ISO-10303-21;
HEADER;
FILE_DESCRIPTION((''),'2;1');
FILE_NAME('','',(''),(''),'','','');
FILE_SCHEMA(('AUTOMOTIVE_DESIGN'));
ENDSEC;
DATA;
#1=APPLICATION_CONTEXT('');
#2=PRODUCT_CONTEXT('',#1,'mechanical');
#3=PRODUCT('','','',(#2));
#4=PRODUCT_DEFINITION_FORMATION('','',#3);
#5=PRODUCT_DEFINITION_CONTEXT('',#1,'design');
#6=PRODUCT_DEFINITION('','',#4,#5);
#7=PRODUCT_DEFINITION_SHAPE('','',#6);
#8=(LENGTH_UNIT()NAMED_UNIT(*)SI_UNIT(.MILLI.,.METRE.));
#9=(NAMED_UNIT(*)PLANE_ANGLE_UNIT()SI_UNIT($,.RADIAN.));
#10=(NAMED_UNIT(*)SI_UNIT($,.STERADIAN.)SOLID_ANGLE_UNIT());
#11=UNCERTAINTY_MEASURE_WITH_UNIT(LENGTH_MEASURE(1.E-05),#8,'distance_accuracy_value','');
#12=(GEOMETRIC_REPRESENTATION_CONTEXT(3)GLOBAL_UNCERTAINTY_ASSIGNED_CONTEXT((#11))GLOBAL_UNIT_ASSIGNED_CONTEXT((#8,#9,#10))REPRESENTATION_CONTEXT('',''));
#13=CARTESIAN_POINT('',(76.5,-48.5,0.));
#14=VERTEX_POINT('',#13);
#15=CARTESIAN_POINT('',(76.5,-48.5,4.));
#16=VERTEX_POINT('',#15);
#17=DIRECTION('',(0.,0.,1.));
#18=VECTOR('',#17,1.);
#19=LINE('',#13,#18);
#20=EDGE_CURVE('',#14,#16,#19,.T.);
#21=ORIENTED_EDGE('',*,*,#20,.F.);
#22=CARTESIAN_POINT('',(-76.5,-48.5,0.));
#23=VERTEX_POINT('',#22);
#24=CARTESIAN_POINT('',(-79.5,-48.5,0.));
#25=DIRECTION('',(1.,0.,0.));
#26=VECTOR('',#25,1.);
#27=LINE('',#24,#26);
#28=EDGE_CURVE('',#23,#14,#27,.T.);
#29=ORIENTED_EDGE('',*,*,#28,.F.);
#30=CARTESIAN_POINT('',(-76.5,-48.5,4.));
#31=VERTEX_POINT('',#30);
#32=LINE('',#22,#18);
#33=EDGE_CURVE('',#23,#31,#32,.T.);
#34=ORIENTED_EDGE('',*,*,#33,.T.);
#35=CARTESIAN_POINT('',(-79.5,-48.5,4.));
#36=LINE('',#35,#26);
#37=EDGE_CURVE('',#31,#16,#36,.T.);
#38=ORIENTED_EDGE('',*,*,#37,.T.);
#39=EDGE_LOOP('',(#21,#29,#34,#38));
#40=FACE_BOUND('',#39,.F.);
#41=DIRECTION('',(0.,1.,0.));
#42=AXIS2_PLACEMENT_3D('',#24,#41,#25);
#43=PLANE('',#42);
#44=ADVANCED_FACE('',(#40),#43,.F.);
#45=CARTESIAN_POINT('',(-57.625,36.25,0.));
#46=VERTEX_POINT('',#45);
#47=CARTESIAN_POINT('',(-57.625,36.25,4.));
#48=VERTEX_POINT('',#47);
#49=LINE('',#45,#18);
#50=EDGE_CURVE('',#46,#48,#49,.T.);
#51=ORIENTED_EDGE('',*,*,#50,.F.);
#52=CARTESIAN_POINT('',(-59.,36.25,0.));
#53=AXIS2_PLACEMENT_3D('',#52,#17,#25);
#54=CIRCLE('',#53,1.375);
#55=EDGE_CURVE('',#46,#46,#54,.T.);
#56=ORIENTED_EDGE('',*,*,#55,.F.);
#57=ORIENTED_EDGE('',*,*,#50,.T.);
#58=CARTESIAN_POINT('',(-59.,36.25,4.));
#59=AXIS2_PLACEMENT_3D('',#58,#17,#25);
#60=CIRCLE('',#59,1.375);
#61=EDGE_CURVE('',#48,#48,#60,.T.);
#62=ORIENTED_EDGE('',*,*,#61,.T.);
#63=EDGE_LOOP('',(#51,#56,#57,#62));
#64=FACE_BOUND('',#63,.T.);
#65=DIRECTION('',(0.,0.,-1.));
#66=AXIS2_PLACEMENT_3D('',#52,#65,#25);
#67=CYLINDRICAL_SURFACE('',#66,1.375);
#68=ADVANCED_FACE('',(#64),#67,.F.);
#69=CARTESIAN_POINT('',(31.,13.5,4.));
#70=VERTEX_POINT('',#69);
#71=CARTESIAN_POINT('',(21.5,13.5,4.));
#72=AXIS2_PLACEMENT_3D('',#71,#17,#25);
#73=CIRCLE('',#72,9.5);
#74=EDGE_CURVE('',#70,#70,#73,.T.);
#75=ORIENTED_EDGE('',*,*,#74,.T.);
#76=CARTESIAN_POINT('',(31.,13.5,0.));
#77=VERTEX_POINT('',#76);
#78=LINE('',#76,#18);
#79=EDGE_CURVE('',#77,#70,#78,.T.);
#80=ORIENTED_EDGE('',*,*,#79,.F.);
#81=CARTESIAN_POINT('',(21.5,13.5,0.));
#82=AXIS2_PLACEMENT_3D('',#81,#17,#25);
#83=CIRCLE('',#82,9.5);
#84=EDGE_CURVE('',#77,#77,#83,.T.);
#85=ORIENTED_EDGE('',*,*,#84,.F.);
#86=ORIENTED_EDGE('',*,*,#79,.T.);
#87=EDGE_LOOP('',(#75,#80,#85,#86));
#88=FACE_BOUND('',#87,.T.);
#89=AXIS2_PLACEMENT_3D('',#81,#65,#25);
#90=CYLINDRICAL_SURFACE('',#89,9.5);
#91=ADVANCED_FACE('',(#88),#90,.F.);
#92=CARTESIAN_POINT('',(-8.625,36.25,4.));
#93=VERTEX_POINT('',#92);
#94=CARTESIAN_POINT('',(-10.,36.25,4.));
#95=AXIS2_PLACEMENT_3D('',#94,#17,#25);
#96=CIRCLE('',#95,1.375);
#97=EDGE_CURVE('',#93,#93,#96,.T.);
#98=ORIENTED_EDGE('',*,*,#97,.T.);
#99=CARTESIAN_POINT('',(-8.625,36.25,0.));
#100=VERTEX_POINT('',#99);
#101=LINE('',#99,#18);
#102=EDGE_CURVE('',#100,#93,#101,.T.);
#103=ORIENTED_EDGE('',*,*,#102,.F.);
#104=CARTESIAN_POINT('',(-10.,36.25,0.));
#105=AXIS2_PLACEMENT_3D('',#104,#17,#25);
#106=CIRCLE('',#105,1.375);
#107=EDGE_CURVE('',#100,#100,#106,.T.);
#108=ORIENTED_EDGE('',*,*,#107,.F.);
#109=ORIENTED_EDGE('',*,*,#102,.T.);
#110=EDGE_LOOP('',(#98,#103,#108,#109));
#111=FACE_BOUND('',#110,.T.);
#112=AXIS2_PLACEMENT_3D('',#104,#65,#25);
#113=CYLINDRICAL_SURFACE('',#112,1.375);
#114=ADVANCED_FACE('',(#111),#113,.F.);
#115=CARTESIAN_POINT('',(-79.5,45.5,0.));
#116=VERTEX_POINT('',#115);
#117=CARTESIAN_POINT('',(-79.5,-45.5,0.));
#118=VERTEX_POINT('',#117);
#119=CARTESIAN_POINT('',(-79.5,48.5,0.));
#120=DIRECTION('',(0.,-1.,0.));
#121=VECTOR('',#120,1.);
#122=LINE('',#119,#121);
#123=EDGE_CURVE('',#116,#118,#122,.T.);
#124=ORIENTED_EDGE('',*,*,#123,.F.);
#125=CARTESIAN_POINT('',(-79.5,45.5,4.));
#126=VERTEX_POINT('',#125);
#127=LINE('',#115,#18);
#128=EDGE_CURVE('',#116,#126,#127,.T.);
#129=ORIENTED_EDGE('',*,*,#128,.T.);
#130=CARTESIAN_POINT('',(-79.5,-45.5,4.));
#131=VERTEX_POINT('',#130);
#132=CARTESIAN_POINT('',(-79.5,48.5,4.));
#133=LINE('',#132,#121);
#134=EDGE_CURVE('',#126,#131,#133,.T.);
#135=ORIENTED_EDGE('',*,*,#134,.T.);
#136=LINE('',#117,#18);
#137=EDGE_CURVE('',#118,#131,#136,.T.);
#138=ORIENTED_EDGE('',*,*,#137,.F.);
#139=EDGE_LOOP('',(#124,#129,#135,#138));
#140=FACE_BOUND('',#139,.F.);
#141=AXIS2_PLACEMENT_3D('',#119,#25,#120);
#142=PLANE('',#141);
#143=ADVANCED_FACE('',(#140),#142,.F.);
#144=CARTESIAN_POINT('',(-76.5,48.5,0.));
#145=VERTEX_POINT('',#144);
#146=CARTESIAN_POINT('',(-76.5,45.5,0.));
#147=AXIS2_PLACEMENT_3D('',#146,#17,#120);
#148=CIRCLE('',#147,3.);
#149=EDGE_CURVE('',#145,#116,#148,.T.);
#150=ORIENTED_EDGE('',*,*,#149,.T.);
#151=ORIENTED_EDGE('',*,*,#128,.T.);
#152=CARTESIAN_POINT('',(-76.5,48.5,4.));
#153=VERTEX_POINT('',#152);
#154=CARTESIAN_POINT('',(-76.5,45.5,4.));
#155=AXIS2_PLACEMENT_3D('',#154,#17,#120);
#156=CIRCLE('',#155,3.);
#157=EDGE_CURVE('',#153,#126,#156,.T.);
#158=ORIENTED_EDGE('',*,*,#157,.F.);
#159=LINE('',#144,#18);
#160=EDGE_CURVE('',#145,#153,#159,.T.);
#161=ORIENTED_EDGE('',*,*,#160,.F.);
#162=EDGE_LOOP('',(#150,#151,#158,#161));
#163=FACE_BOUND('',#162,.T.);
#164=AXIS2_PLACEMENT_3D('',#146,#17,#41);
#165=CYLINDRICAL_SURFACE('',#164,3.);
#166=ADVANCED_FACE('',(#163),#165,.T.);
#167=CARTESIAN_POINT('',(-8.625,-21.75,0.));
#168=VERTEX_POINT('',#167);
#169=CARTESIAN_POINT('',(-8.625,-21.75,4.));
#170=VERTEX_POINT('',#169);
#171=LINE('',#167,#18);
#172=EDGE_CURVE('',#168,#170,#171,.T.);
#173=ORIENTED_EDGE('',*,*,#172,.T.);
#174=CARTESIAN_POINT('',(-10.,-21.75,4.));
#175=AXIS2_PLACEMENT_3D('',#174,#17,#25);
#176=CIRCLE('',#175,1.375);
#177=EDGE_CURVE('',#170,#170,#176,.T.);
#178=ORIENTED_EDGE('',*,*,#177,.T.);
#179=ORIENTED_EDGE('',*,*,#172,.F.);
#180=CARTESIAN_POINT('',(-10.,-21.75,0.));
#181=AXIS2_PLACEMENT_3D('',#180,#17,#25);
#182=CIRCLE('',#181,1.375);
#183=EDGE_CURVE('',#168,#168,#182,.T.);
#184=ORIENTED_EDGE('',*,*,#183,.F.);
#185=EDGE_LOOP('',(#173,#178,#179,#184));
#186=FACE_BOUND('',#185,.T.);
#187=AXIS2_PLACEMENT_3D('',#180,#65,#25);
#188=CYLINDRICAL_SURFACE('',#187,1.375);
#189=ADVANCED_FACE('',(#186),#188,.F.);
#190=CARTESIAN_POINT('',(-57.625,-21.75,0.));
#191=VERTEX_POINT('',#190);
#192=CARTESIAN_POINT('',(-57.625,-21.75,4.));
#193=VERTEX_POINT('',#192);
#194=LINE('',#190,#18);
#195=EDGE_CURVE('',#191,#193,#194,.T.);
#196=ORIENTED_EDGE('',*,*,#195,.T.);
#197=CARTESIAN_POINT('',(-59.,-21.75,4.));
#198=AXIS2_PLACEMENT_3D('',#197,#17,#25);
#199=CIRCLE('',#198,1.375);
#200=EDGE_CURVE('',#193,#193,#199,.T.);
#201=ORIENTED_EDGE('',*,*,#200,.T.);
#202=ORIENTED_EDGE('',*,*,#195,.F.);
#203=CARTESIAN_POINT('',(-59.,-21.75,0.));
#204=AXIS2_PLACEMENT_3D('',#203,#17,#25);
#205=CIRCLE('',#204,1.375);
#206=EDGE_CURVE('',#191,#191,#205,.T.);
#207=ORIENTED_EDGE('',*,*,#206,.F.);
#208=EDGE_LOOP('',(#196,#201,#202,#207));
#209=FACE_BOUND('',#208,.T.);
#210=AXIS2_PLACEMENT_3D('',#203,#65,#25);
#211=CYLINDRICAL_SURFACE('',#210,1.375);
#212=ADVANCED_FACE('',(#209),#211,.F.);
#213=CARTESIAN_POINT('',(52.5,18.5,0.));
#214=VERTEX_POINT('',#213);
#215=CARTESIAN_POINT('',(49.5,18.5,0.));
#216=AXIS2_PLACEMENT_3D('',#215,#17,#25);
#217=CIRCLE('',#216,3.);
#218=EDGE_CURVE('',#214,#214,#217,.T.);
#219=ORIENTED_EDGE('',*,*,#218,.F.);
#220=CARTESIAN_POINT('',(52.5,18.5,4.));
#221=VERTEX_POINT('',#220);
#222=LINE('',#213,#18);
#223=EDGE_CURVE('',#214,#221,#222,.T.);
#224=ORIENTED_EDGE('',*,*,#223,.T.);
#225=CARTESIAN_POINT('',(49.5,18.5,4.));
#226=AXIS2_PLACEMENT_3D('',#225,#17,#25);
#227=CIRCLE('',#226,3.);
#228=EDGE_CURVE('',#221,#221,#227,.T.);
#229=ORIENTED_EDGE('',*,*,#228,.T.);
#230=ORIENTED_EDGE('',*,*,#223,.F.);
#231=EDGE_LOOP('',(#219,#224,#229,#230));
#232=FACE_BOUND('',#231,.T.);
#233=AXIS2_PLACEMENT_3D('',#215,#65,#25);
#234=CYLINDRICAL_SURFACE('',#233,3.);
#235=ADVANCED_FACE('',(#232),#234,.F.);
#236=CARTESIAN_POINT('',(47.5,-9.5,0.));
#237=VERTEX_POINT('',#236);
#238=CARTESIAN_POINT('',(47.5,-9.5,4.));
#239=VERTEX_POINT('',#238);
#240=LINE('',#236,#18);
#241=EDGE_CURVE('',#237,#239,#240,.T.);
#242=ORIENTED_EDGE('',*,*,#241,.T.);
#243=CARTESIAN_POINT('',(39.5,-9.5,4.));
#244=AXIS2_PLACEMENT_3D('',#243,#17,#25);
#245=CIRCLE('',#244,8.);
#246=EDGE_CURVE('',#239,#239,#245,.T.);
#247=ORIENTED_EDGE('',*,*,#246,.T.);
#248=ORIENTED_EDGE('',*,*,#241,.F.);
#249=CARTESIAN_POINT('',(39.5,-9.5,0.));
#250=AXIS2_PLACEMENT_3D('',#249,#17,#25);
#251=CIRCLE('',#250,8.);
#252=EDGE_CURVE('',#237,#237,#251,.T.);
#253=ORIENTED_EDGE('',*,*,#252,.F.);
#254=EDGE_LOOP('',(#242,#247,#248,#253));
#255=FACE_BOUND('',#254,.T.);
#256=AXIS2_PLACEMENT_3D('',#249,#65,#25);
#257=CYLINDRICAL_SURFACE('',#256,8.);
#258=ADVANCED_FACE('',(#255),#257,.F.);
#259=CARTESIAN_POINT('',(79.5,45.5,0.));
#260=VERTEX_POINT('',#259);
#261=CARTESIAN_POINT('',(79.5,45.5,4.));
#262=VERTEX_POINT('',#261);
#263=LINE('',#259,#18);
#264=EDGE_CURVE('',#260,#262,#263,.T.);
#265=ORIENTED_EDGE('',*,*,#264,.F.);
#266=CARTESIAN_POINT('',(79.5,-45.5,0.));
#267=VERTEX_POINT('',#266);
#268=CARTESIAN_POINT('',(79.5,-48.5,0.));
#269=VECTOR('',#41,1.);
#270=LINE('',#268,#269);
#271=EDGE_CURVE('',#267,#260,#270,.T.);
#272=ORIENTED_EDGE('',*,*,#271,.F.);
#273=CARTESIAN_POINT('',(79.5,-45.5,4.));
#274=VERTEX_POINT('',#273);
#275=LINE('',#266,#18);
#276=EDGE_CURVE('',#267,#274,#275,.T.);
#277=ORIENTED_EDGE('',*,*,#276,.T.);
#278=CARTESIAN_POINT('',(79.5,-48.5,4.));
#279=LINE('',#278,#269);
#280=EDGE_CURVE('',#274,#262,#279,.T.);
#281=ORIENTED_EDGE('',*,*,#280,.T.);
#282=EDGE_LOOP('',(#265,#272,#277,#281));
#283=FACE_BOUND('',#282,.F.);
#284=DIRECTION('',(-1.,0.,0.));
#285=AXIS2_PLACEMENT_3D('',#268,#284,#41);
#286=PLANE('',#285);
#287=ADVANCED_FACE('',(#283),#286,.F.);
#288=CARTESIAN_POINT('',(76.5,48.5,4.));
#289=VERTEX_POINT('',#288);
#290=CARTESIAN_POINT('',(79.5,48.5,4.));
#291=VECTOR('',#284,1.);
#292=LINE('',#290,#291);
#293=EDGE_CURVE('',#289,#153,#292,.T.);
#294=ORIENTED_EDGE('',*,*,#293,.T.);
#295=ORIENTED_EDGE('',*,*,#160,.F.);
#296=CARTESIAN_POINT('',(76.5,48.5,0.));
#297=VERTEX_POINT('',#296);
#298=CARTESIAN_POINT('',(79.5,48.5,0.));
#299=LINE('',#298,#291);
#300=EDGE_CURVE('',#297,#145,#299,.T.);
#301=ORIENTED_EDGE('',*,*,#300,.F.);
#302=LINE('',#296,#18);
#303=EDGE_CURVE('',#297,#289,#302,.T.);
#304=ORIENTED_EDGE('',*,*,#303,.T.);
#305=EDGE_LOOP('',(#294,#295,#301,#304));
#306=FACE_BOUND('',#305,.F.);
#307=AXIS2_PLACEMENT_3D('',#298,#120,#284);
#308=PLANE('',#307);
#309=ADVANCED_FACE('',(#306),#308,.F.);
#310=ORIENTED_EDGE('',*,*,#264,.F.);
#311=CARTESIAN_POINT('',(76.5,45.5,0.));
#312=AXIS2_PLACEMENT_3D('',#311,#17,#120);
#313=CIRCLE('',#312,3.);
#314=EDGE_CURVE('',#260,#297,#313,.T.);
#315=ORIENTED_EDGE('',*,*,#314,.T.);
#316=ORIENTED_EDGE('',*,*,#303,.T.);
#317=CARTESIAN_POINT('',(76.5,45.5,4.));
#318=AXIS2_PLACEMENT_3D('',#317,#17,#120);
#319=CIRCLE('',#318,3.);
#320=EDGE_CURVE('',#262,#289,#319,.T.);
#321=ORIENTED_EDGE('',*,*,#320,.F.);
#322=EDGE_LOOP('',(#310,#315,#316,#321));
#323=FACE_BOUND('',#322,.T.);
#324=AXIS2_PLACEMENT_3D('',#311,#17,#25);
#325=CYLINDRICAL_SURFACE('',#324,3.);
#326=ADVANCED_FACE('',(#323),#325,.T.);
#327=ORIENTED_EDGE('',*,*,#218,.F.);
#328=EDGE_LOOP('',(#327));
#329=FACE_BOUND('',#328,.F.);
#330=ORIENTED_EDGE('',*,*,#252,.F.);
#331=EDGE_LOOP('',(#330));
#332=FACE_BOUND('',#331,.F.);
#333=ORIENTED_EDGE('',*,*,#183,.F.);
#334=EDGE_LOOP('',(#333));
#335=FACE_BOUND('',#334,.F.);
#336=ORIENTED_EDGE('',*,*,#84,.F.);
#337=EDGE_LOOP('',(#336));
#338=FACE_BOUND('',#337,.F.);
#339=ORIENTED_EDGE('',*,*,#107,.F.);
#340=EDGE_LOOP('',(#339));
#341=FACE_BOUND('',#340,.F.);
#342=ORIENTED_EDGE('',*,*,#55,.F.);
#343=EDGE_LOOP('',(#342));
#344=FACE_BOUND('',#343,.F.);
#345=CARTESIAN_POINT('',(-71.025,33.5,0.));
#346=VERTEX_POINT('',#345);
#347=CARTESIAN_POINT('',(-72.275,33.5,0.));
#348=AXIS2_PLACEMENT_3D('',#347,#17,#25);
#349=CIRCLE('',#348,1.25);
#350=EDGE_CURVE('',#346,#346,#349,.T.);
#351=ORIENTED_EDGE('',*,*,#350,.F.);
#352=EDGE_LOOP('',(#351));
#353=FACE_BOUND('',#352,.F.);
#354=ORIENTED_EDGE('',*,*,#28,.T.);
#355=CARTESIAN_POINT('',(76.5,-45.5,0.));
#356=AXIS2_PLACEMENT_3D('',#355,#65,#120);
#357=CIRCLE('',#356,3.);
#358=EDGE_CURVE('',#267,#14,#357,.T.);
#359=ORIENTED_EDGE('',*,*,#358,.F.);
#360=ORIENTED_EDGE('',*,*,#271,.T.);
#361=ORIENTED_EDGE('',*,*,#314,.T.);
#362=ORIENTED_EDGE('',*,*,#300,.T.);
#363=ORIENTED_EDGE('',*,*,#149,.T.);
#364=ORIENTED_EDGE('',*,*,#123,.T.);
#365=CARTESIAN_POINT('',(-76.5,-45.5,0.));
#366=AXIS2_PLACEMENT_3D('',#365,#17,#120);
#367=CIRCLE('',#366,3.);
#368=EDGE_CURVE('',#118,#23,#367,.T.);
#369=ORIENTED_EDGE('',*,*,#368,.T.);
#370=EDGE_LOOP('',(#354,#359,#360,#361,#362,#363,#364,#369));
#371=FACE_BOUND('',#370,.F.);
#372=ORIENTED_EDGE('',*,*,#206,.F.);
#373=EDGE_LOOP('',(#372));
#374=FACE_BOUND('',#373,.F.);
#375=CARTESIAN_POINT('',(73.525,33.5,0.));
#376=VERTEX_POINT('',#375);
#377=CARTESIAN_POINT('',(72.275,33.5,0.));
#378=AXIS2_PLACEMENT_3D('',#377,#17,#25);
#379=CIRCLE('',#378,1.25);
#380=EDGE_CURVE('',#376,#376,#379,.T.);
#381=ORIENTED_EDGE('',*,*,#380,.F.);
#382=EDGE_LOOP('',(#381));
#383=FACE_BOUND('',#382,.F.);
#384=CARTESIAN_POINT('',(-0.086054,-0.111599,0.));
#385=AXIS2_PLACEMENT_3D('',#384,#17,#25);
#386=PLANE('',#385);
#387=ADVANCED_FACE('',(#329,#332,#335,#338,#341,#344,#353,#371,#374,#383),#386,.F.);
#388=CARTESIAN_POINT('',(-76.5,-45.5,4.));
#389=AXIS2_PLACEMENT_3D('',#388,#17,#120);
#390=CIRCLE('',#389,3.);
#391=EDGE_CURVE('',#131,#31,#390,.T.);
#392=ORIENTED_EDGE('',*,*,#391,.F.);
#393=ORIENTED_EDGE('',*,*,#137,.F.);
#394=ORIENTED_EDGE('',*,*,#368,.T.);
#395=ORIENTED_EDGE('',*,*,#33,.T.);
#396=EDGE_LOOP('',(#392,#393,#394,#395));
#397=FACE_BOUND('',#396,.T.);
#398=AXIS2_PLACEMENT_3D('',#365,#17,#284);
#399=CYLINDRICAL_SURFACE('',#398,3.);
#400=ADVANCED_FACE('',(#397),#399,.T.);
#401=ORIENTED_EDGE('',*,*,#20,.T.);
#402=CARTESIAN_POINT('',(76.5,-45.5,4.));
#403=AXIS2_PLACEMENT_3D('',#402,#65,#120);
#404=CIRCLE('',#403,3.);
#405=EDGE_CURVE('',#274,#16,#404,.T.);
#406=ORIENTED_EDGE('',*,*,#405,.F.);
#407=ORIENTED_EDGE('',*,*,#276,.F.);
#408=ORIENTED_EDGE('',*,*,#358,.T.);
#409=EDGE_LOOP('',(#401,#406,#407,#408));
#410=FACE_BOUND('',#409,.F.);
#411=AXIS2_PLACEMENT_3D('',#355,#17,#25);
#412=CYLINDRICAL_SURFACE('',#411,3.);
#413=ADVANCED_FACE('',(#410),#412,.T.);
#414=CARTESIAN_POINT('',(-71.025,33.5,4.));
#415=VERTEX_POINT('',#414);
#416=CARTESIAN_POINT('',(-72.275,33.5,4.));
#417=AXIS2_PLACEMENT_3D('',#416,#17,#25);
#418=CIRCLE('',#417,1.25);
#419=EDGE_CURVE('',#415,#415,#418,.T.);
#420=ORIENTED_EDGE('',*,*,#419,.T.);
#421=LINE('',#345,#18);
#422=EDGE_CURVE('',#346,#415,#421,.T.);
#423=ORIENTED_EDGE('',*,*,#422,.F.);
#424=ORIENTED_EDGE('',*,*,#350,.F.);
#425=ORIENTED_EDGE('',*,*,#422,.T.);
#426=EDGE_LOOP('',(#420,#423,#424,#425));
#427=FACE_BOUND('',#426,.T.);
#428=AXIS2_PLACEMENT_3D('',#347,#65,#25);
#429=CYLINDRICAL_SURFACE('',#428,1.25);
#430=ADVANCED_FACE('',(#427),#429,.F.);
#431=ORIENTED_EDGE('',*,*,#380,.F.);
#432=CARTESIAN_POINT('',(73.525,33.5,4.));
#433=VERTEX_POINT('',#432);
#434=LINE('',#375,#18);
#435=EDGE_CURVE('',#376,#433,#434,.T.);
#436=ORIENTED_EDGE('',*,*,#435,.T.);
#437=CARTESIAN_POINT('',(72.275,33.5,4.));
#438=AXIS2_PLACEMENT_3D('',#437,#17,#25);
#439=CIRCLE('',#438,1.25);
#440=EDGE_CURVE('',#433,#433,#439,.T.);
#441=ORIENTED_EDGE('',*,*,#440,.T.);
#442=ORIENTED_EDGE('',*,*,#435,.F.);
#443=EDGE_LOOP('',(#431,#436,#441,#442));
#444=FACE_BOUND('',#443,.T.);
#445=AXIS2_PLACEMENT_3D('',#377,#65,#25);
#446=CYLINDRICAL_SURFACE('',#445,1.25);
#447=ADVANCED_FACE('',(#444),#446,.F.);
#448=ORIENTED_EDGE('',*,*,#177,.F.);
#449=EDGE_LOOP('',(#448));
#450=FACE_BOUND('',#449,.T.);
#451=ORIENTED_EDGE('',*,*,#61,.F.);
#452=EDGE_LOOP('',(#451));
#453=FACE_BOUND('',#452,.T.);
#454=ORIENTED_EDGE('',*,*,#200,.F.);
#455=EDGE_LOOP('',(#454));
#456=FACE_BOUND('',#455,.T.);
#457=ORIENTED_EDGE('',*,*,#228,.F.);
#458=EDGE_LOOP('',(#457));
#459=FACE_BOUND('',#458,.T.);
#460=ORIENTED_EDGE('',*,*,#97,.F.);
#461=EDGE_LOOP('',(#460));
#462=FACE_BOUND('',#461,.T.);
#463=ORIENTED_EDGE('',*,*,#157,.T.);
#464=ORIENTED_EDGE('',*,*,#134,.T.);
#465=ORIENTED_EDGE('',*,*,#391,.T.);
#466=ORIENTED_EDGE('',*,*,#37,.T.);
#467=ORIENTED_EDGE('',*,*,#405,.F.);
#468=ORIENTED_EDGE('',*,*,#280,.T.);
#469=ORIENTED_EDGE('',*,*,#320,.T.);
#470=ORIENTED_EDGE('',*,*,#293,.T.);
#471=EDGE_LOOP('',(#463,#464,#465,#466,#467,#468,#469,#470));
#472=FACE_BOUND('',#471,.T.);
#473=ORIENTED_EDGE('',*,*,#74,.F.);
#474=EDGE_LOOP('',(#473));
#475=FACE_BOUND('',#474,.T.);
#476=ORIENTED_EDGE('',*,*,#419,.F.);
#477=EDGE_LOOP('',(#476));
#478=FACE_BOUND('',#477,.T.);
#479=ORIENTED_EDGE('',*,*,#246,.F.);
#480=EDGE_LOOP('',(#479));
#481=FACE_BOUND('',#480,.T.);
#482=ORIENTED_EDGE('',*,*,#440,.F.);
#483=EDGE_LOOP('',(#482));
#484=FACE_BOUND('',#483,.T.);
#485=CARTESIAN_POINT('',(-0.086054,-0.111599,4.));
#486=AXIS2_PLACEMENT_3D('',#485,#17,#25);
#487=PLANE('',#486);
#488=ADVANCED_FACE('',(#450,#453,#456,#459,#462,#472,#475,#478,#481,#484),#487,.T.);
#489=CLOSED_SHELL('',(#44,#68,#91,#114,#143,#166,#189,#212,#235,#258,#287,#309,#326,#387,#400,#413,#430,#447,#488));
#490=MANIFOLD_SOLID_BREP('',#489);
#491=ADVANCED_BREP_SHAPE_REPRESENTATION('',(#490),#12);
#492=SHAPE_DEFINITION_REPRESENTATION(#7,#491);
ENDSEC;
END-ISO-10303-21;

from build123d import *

# Parameters (mm, degrees)
F0_R     = 1.375
F0_R_2   = 1.25
F0_R_3   = 8
F0_R_4   = 9.5
F0_R_5   = 3
F1_DEPTH = 4
F2_R     = 3


with BuildPart() as f1:
    # F0 (on Top) → F1 (new body)
    with BuildSketch(Plane.XY):
        with BuildLine():
            Line((-4.7679491924, -48.5), (79.5, -48.5))
            Line((79.5, -48.5), (79.5, 48.5))
            Line((79.5, 48.5), (-79.5, 48.5))
            Line((-79.5, 48.5), (-79.5, -48.5))
            Line((-79.5, -48.5), (-64.2320508076, -48.5))
            ThreePointArc((-64.2320508076, -48.5), (-62.5, -47.5), (-60.7679491924, -48.5))
            Line((-60.7679491924, -48.5), (-8.2320508076, -48.5))
            ThreePointArc((-8.2320508076, -48.5), (-6.5, -47.5), (-4.7679491924, -48.5))
        make_face()
        with Locations((-59, -21.75)):
            Circle(F0_R, mode=Mode.SUBTRACT)
        with Locations((-10, -21.75)):
            Circle(F0_R, mode=Mode.SUBTRACT)
        with Locations((-72.275, 33.5)):
            Circle(F0_R_2, mode=Mode.SUBTRACT)
        with Locations((-59, 36.25)):
            Circle(F0_R, mode=Mode.SUBTRACT)
        with Locations((-10, 36.25)):
            Circle(F0_R, mode=Mode.SUBTRACT)
        with Locations((39.5, -9.5)):
            Circle(F0_R_3, mode=Mode.SUBTRACT)
        with Locations((21.5, 13.5)):
            Circle(F0_R_4, mode=Mode.SUBTRACT)
        with Locations((49.5, 18.5)):
            Circle(F0_R_5, mode=Mode.SUBTRACT)
        with Locations((72.275, 33.5)):
            Circle(F0_R_2, mode=Mode.SUBTRACT)
        with BuildLine():
            Line((-8.2320508076, -48.5), (-4.7679491924, -48.5))
            ThreePointArc((-4.7679491924, -48.5), (-6.5, -47.5), (-8.2320508076, -48.5))
        make_face()
        with BuildLine():
            Line((-64.2320508076, -48.5), (-60.7679491924, -48.5))
            ThreePointArc((-60.7679491924, -48.5), (-62.5, -47.5), (-64.2320508076, -48.5))
        make_face()
    extrude(amount=F1_DEPTH)

    # F2
    f2_edges = [f1.edges().sort_by_distance(p)[0] for p in [
        (-79.5, 48.5, 2),
        (79.5, 48.5, 2),
        (79.5, -48.5, 2),
        (-79.5, -48.5, 2),
    ]]
    fillet(f2_edges, radius=F2_R)


solid = f1.part
